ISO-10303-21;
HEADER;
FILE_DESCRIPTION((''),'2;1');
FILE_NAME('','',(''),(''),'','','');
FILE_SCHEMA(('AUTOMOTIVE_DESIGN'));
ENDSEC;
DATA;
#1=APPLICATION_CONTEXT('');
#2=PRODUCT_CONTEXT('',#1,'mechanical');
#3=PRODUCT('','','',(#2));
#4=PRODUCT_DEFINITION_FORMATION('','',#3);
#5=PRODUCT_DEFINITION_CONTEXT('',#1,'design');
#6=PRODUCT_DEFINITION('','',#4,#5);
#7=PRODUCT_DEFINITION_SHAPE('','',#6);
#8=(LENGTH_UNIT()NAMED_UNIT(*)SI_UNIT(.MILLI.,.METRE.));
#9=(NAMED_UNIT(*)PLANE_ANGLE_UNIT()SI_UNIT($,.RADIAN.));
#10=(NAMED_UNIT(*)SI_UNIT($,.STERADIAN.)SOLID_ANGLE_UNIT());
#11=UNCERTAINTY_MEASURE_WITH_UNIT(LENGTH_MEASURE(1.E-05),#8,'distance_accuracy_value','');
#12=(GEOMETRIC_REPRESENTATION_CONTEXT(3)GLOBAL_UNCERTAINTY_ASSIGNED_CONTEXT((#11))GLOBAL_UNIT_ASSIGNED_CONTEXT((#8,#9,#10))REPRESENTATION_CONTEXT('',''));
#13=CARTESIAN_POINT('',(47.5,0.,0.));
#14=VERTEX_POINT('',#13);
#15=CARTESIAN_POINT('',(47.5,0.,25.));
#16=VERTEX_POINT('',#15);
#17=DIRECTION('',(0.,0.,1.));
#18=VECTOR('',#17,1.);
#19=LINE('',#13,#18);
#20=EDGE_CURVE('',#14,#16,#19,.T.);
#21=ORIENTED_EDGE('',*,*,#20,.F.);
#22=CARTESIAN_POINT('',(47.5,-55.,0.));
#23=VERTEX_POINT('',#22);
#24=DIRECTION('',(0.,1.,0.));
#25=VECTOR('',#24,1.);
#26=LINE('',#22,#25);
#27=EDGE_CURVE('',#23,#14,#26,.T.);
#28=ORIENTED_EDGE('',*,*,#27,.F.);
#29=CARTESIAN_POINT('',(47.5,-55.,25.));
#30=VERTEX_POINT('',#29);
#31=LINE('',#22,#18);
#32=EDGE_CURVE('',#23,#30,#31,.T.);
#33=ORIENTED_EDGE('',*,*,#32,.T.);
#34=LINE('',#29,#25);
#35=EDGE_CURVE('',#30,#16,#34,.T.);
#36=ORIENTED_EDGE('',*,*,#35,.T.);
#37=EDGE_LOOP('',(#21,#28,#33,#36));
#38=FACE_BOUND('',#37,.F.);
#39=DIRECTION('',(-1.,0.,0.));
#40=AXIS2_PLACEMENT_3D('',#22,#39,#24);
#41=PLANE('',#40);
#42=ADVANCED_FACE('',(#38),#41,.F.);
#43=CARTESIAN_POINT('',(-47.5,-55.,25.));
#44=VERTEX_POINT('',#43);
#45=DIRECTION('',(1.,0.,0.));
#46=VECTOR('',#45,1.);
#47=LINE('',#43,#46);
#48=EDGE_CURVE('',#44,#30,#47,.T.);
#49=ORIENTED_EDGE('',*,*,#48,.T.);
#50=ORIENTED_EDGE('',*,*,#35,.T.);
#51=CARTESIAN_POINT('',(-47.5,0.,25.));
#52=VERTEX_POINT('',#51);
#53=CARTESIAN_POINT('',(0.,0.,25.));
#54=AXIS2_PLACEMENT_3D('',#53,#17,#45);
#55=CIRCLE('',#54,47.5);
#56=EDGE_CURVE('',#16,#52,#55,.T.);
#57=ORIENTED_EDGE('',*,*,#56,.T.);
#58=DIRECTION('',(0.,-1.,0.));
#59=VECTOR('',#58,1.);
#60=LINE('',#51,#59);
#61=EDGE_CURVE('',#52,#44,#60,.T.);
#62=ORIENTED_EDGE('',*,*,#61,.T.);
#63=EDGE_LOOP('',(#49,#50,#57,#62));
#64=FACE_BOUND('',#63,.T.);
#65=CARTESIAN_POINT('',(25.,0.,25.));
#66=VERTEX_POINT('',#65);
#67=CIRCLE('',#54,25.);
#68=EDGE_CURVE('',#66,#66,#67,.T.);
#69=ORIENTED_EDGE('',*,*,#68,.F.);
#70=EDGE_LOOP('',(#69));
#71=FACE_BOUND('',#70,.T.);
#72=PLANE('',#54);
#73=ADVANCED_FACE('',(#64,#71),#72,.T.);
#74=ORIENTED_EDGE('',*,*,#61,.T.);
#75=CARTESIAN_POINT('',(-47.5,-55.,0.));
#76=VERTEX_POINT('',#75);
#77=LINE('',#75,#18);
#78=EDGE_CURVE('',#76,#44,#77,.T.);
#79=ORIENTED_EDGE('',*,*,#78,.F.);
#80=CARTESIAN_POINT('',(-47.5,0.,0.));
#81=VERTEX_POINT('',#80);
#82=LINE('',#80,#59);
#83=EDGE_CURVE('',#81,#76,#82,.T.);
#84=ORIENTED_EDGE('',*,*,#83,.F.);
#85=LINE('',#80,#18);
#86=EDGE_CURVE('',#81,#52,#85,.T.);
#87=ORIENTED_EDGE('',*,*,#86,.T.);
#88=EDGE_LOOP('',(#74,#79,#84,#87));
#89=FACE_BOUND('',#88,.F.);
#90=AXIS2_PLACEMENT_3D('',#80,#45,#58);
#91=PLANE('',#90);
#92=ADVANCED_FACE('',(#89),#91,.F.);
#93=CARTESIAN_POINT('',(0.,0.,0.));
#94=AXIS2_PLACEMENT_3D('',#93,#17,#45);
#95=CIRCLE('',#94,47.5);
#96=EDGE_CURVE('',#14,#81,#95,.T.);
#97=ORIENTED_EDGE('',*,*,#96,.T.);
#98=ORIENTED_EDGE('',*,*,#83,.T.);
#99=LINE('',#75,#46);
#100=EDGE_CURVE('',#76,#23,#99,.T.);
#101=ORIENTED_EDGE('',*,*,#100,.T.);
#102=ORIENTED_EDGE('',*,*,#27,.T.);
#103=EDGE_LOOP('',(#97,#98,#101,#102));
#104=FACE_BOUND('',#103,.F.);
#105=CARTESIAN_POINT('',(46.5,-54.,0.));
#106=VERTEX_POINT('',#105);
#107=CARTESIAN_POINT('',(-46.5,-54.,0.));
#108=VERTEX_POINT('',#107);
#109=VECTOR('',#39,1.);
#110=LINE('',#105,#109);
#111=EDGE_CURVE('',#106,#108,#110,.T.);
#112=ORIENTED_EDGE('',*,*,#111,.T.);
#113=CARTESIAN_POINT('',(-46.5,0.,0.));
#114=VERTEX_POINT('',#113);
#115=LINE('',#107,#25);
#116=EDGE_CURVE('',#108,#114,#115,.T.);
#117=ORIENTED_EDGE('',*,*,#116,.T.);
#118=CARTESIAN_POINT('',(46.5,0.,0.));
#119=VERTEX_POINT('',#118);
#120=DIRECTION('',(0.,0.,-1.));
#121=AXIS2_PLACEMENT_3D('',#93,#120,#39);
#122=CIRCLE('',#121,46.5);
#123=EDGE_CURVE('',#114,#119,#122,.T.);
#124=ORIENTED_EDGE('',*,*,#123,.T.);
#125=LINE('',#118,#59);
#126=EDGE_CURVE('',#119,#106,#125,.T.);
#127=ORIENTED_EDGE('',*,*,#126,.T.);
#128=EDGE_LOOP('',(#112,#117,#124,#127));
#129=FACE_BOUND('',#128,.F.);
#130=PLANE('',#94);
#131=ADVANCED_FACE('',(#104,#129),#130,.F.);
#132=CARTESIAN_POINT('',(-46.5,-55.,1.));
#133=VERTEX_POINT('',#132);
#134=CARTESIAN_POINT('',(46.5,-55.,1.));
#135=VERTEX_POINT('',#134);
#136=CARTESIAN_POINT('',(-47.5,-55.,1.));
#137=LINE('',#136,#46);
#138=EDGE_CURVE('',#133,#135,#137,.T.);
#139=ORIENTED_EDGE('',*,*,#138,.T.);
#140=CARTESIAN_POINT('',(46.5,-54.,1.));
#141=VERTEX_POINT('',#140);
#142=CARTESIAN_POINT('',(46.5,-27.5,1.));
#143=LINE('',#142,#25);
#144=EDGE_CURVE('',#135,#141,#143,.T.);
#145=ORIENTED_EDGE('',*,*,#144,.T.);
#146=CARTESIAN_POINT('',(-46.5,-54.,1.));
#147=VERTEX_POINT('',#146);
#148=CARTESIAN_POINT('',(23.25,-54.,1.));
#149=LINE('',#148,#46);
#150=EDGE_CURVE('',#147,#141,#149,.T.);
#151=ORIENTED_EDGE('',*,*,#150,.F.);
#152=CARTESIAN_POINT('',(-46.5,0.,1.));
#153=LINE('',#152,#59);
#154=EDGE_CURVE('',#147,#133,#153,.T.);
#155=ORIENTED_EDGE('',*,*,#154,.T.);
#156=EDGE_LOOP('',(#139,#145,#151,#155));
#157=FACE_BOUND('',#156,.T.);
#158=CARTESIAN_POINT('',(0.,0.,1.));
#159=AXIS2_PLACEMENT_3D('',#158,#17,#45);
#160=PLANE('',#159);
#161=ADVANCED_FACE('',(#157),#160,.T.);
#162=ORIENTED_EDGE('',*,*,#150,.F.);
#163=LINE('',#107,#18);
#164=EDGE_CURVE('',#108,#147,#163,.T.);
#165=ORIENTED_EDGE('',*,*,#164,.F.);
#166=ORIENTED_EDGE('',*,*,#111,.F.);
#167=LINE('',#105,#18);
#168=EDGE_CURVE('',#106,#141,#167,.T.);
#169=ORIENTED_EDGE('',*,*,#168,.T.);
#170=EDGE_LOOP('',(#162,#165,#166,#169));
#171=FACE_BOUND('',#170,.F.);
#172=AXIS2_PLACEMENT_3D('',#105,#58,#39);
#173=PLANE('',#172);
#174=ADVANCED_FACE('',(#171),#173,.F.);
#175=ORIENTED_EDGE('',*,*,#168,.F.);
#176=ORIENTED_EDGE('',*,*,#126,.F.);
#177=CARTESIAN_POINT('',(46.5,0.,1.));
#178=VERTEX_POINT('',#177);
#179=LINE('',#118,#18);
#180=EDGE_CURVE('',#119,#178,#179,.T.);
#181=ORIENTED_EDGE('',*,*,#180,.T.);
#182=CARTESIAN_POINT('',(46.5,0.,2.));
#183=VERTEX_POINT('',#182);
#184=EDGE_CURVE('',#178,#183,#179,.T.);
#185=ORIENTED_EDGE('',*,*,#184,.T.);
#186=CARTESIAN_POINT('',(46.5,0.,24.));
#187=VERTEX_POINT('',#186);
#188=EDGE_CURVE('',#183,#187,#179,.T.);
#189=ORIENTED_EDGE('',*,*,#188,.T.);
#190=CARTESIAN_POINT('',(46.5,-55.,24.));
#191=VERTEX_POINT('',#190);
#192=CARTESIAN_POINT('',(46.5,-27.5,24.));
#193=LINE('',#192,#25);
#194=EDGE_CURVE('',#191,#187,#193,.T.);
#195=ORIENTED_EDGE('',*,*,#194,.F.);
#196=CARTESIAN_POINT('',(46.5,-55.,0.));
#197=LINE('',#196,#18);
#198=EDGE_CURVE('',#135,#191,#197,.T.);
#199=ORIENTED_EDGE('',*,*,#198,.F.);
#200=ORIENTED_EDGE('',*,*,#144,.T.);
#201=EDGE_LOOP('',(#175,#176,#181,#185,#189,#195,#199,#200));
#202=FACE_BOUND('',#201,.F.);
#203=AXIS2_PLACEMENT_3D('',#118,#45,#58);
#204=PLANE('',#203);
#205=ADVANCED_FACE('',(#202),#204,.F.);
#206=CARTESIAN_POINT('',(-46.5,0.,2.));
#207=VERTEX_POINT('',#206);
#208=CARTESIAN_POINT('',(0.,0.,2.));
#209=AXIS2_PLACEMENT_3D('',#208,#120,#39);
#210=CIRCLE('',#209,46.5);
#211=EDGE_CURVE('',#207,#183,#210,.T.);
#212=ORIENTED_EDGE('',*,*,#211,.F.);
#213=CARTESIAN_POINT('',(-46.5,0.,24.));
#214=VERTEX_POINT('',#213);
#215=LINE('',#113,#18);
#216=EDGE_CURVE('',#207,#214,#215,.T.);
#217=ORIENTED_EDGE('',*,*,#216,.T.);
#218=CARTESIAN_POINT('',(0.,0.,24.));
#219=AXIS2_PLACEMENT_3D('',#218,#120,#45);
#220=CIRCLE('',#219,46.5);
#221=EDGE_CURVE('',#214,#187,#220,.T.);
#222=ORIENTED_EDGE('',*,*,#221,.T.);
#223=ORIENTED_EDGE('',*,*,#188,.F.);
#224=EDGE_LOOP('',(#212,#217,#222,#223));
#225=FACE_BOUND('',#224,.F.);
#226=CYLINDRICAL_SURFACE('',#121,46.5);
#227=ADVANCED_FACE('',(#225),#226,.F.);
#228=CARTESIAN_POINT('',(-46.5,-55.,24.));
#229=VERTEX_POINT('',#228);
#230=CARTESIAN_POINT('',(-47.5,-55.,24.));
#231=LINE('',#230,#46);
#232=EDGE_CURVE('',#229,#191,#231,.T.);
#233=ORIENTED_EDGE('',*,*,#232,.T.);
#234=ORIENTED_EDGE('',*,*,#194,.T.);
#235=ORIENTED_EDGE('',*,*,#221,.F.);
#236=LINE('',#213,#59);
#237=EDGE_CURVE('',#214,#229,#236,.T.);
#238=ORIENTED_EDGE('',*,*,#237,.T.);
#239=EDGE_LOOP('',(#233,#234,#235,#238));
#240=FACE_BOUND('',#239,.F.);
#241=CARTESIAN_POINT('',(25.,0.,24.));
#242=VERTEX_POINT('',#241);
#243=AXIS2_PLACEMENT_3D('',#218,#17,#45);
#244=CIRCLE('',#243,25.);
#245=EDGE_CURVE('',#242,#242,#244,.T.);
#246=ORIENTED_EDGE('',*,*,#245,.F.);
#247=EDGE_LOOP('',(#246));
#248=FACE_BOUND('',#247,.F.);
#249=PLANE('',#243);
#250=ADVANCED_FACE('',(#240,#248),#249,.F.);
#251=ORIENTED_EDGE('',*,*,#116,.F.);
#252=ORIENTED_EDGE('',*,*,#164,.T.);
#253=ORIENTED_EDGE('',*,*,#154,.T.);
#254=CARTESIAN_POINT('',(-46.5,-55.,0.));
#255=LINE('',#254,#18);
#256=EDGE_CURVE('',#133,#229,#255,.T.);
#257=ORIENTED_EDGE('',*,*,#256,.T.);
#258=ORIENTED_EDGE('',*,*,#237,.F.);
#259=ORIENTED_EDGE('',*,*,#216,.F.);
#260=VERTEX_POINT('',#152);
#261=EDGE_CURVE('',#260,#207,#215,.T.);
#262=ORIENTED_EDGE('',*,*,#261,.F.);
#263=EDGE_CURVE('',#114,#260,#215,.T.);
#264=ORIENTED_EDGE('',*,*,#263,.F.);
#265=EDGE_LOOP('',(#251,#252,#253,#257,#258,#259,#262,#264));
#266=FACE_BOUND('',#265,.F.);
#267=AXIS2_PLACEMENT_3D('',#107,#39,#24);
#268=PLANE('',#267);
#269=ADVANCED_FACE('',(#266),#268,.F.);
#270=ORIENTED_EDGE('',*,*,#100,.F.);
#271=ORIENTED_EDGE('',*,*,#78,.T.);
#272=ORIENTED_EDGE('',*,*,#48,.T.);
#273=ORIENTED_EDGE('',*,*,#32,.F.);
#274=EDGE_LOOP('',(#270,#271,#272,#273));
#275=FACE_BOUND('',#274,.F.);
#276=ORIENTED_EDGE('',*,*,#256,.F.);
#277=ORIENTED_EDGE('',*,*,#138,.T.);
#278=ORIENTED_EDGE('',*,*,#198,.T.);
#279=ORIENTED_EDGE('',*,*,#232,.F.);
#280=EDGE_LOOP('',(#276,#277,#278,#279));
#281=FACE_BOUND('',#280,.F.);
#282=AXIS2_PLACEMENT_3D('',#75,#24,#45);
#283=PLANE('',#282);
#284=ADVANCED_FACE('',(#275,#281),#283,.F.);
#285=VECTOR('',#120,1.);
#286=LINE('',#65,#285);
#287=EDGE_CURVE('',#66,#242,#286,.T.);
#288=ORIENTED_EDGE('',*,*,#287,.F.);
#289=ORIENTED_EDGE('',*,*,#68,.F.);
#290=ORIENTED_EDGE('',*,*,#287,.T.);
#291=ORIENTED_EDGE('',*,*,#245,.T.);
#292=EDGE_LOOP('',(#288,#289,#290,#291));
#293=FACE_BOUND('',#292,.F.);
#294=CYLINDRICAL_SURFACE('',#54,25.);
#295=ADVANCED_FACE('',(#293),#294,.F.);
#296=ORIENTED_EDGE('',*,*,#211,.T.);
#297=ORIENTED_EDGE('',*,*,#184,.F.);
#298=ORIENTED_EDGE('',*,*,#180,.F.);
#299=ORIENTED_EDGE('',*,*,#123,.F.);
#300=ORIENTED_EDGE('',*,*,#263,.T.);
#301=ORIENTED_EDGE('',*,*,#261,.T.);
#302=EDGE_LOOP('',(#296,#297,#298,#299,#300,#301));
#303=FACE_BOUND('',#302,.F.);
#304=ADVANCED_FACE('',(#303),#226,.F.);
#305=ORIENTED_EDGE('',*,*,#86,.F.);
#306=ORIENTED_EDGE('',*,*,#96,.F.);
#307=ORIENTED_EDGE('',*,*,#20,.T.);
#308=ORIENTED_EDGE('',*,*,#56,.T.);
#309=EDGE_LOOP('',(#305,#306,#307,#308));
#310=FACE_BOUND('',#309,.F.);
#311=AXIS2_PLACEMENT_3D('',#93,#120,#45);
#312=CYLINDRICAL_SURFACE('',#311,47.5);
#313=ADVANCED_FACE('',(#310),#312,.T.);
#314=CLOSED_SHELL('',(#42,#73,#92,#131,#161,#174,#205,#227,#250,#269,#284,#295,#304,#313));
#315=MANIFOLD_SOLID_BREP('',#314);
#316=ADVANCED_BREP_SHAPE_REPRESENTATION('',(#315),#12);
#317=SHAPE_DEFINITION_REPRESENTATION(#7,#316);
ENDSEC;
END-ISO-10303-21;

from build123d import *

# Parameters (mm, degrees)
F1_DEPTH = 25
F2_T     = -1
F3_R     = 25
F4_DEPTH = 25.001
F5_R     = 25
F6_DEPTH = 2


# Not quite as in the source:
# - after a boolean that leaves OpenCascade's solid faulty, fix() repairs it


with BuildPart() as f1:
    # F0 (on Top) → F1 (new body)
    with BuildSketch(Plane.XY):
        with BuildLine():
            ThreePointArc((-47.5, 0), (0, -47.5), (47.5, 0))
            ThreePointArc((47.5, 0), (0, 47.5), (-47.5, 0))
        make_face()
        with BuildLine():
            Line((47.5, -55), (47.5, 0))
            ThreePointArc((47.5, 0), (0, -47.5), (-47.5, 0))
            Line((-47.5, 0), (-47.5, -55))
            Line((-47.5, -55), (47.5, -55))
        make_face()
    extrude(amount=F1_DEPTH)

    # F2
    f2_openings = [f1.faces().sort_by_distance(p)[0] for p in [
        (0, -55, 12.5),
    ]]
    offset(amount=F2_T, openings=f2_openings)

    # F3 (on face) → F4 (cut, through all)
    with BuildSketch(Plane.XY.offset(25)):
        Circle(F3_R)
    extrude(amount=-F4_DEPTH, mode=Mode.SUBTRACT)

    # F5 (on face) → F6 (cut)
    with BuildSketch(Plane(origin=(0, 0, 0), x_dir=(1, 0, 0), z_dir=(0, 0, -1))):
        with BuildLine():
            Line((-46.5, 54), (-46.5, 0))
            ThreePointArc((-46.5, 0), (0, -46.5), (46.5, 0))
            Line((46.5, 0), (46.5, 54))
            Line((46.5, 54), (-46.5, 54))
        make_face()
        Circle(F5_R, mode=Mode.SUBTRACT)
        with BuildLine():
            Line((-46.5, 54), (-46.5, 0))
            ThreePointArc((-46.5, 0), (0, -46.5), (46.5, 0))
            Line((46.5, 0), (46.5, 54))
            Line((46.5, 54), (-46.5, 54))
        make_face()
    extrude(amount=-F6_DEPTH, mode=Mode.SUBTRACT)

    add(f1.part.fix(), mode=Mode.REPLACE)


solid = f1.part
